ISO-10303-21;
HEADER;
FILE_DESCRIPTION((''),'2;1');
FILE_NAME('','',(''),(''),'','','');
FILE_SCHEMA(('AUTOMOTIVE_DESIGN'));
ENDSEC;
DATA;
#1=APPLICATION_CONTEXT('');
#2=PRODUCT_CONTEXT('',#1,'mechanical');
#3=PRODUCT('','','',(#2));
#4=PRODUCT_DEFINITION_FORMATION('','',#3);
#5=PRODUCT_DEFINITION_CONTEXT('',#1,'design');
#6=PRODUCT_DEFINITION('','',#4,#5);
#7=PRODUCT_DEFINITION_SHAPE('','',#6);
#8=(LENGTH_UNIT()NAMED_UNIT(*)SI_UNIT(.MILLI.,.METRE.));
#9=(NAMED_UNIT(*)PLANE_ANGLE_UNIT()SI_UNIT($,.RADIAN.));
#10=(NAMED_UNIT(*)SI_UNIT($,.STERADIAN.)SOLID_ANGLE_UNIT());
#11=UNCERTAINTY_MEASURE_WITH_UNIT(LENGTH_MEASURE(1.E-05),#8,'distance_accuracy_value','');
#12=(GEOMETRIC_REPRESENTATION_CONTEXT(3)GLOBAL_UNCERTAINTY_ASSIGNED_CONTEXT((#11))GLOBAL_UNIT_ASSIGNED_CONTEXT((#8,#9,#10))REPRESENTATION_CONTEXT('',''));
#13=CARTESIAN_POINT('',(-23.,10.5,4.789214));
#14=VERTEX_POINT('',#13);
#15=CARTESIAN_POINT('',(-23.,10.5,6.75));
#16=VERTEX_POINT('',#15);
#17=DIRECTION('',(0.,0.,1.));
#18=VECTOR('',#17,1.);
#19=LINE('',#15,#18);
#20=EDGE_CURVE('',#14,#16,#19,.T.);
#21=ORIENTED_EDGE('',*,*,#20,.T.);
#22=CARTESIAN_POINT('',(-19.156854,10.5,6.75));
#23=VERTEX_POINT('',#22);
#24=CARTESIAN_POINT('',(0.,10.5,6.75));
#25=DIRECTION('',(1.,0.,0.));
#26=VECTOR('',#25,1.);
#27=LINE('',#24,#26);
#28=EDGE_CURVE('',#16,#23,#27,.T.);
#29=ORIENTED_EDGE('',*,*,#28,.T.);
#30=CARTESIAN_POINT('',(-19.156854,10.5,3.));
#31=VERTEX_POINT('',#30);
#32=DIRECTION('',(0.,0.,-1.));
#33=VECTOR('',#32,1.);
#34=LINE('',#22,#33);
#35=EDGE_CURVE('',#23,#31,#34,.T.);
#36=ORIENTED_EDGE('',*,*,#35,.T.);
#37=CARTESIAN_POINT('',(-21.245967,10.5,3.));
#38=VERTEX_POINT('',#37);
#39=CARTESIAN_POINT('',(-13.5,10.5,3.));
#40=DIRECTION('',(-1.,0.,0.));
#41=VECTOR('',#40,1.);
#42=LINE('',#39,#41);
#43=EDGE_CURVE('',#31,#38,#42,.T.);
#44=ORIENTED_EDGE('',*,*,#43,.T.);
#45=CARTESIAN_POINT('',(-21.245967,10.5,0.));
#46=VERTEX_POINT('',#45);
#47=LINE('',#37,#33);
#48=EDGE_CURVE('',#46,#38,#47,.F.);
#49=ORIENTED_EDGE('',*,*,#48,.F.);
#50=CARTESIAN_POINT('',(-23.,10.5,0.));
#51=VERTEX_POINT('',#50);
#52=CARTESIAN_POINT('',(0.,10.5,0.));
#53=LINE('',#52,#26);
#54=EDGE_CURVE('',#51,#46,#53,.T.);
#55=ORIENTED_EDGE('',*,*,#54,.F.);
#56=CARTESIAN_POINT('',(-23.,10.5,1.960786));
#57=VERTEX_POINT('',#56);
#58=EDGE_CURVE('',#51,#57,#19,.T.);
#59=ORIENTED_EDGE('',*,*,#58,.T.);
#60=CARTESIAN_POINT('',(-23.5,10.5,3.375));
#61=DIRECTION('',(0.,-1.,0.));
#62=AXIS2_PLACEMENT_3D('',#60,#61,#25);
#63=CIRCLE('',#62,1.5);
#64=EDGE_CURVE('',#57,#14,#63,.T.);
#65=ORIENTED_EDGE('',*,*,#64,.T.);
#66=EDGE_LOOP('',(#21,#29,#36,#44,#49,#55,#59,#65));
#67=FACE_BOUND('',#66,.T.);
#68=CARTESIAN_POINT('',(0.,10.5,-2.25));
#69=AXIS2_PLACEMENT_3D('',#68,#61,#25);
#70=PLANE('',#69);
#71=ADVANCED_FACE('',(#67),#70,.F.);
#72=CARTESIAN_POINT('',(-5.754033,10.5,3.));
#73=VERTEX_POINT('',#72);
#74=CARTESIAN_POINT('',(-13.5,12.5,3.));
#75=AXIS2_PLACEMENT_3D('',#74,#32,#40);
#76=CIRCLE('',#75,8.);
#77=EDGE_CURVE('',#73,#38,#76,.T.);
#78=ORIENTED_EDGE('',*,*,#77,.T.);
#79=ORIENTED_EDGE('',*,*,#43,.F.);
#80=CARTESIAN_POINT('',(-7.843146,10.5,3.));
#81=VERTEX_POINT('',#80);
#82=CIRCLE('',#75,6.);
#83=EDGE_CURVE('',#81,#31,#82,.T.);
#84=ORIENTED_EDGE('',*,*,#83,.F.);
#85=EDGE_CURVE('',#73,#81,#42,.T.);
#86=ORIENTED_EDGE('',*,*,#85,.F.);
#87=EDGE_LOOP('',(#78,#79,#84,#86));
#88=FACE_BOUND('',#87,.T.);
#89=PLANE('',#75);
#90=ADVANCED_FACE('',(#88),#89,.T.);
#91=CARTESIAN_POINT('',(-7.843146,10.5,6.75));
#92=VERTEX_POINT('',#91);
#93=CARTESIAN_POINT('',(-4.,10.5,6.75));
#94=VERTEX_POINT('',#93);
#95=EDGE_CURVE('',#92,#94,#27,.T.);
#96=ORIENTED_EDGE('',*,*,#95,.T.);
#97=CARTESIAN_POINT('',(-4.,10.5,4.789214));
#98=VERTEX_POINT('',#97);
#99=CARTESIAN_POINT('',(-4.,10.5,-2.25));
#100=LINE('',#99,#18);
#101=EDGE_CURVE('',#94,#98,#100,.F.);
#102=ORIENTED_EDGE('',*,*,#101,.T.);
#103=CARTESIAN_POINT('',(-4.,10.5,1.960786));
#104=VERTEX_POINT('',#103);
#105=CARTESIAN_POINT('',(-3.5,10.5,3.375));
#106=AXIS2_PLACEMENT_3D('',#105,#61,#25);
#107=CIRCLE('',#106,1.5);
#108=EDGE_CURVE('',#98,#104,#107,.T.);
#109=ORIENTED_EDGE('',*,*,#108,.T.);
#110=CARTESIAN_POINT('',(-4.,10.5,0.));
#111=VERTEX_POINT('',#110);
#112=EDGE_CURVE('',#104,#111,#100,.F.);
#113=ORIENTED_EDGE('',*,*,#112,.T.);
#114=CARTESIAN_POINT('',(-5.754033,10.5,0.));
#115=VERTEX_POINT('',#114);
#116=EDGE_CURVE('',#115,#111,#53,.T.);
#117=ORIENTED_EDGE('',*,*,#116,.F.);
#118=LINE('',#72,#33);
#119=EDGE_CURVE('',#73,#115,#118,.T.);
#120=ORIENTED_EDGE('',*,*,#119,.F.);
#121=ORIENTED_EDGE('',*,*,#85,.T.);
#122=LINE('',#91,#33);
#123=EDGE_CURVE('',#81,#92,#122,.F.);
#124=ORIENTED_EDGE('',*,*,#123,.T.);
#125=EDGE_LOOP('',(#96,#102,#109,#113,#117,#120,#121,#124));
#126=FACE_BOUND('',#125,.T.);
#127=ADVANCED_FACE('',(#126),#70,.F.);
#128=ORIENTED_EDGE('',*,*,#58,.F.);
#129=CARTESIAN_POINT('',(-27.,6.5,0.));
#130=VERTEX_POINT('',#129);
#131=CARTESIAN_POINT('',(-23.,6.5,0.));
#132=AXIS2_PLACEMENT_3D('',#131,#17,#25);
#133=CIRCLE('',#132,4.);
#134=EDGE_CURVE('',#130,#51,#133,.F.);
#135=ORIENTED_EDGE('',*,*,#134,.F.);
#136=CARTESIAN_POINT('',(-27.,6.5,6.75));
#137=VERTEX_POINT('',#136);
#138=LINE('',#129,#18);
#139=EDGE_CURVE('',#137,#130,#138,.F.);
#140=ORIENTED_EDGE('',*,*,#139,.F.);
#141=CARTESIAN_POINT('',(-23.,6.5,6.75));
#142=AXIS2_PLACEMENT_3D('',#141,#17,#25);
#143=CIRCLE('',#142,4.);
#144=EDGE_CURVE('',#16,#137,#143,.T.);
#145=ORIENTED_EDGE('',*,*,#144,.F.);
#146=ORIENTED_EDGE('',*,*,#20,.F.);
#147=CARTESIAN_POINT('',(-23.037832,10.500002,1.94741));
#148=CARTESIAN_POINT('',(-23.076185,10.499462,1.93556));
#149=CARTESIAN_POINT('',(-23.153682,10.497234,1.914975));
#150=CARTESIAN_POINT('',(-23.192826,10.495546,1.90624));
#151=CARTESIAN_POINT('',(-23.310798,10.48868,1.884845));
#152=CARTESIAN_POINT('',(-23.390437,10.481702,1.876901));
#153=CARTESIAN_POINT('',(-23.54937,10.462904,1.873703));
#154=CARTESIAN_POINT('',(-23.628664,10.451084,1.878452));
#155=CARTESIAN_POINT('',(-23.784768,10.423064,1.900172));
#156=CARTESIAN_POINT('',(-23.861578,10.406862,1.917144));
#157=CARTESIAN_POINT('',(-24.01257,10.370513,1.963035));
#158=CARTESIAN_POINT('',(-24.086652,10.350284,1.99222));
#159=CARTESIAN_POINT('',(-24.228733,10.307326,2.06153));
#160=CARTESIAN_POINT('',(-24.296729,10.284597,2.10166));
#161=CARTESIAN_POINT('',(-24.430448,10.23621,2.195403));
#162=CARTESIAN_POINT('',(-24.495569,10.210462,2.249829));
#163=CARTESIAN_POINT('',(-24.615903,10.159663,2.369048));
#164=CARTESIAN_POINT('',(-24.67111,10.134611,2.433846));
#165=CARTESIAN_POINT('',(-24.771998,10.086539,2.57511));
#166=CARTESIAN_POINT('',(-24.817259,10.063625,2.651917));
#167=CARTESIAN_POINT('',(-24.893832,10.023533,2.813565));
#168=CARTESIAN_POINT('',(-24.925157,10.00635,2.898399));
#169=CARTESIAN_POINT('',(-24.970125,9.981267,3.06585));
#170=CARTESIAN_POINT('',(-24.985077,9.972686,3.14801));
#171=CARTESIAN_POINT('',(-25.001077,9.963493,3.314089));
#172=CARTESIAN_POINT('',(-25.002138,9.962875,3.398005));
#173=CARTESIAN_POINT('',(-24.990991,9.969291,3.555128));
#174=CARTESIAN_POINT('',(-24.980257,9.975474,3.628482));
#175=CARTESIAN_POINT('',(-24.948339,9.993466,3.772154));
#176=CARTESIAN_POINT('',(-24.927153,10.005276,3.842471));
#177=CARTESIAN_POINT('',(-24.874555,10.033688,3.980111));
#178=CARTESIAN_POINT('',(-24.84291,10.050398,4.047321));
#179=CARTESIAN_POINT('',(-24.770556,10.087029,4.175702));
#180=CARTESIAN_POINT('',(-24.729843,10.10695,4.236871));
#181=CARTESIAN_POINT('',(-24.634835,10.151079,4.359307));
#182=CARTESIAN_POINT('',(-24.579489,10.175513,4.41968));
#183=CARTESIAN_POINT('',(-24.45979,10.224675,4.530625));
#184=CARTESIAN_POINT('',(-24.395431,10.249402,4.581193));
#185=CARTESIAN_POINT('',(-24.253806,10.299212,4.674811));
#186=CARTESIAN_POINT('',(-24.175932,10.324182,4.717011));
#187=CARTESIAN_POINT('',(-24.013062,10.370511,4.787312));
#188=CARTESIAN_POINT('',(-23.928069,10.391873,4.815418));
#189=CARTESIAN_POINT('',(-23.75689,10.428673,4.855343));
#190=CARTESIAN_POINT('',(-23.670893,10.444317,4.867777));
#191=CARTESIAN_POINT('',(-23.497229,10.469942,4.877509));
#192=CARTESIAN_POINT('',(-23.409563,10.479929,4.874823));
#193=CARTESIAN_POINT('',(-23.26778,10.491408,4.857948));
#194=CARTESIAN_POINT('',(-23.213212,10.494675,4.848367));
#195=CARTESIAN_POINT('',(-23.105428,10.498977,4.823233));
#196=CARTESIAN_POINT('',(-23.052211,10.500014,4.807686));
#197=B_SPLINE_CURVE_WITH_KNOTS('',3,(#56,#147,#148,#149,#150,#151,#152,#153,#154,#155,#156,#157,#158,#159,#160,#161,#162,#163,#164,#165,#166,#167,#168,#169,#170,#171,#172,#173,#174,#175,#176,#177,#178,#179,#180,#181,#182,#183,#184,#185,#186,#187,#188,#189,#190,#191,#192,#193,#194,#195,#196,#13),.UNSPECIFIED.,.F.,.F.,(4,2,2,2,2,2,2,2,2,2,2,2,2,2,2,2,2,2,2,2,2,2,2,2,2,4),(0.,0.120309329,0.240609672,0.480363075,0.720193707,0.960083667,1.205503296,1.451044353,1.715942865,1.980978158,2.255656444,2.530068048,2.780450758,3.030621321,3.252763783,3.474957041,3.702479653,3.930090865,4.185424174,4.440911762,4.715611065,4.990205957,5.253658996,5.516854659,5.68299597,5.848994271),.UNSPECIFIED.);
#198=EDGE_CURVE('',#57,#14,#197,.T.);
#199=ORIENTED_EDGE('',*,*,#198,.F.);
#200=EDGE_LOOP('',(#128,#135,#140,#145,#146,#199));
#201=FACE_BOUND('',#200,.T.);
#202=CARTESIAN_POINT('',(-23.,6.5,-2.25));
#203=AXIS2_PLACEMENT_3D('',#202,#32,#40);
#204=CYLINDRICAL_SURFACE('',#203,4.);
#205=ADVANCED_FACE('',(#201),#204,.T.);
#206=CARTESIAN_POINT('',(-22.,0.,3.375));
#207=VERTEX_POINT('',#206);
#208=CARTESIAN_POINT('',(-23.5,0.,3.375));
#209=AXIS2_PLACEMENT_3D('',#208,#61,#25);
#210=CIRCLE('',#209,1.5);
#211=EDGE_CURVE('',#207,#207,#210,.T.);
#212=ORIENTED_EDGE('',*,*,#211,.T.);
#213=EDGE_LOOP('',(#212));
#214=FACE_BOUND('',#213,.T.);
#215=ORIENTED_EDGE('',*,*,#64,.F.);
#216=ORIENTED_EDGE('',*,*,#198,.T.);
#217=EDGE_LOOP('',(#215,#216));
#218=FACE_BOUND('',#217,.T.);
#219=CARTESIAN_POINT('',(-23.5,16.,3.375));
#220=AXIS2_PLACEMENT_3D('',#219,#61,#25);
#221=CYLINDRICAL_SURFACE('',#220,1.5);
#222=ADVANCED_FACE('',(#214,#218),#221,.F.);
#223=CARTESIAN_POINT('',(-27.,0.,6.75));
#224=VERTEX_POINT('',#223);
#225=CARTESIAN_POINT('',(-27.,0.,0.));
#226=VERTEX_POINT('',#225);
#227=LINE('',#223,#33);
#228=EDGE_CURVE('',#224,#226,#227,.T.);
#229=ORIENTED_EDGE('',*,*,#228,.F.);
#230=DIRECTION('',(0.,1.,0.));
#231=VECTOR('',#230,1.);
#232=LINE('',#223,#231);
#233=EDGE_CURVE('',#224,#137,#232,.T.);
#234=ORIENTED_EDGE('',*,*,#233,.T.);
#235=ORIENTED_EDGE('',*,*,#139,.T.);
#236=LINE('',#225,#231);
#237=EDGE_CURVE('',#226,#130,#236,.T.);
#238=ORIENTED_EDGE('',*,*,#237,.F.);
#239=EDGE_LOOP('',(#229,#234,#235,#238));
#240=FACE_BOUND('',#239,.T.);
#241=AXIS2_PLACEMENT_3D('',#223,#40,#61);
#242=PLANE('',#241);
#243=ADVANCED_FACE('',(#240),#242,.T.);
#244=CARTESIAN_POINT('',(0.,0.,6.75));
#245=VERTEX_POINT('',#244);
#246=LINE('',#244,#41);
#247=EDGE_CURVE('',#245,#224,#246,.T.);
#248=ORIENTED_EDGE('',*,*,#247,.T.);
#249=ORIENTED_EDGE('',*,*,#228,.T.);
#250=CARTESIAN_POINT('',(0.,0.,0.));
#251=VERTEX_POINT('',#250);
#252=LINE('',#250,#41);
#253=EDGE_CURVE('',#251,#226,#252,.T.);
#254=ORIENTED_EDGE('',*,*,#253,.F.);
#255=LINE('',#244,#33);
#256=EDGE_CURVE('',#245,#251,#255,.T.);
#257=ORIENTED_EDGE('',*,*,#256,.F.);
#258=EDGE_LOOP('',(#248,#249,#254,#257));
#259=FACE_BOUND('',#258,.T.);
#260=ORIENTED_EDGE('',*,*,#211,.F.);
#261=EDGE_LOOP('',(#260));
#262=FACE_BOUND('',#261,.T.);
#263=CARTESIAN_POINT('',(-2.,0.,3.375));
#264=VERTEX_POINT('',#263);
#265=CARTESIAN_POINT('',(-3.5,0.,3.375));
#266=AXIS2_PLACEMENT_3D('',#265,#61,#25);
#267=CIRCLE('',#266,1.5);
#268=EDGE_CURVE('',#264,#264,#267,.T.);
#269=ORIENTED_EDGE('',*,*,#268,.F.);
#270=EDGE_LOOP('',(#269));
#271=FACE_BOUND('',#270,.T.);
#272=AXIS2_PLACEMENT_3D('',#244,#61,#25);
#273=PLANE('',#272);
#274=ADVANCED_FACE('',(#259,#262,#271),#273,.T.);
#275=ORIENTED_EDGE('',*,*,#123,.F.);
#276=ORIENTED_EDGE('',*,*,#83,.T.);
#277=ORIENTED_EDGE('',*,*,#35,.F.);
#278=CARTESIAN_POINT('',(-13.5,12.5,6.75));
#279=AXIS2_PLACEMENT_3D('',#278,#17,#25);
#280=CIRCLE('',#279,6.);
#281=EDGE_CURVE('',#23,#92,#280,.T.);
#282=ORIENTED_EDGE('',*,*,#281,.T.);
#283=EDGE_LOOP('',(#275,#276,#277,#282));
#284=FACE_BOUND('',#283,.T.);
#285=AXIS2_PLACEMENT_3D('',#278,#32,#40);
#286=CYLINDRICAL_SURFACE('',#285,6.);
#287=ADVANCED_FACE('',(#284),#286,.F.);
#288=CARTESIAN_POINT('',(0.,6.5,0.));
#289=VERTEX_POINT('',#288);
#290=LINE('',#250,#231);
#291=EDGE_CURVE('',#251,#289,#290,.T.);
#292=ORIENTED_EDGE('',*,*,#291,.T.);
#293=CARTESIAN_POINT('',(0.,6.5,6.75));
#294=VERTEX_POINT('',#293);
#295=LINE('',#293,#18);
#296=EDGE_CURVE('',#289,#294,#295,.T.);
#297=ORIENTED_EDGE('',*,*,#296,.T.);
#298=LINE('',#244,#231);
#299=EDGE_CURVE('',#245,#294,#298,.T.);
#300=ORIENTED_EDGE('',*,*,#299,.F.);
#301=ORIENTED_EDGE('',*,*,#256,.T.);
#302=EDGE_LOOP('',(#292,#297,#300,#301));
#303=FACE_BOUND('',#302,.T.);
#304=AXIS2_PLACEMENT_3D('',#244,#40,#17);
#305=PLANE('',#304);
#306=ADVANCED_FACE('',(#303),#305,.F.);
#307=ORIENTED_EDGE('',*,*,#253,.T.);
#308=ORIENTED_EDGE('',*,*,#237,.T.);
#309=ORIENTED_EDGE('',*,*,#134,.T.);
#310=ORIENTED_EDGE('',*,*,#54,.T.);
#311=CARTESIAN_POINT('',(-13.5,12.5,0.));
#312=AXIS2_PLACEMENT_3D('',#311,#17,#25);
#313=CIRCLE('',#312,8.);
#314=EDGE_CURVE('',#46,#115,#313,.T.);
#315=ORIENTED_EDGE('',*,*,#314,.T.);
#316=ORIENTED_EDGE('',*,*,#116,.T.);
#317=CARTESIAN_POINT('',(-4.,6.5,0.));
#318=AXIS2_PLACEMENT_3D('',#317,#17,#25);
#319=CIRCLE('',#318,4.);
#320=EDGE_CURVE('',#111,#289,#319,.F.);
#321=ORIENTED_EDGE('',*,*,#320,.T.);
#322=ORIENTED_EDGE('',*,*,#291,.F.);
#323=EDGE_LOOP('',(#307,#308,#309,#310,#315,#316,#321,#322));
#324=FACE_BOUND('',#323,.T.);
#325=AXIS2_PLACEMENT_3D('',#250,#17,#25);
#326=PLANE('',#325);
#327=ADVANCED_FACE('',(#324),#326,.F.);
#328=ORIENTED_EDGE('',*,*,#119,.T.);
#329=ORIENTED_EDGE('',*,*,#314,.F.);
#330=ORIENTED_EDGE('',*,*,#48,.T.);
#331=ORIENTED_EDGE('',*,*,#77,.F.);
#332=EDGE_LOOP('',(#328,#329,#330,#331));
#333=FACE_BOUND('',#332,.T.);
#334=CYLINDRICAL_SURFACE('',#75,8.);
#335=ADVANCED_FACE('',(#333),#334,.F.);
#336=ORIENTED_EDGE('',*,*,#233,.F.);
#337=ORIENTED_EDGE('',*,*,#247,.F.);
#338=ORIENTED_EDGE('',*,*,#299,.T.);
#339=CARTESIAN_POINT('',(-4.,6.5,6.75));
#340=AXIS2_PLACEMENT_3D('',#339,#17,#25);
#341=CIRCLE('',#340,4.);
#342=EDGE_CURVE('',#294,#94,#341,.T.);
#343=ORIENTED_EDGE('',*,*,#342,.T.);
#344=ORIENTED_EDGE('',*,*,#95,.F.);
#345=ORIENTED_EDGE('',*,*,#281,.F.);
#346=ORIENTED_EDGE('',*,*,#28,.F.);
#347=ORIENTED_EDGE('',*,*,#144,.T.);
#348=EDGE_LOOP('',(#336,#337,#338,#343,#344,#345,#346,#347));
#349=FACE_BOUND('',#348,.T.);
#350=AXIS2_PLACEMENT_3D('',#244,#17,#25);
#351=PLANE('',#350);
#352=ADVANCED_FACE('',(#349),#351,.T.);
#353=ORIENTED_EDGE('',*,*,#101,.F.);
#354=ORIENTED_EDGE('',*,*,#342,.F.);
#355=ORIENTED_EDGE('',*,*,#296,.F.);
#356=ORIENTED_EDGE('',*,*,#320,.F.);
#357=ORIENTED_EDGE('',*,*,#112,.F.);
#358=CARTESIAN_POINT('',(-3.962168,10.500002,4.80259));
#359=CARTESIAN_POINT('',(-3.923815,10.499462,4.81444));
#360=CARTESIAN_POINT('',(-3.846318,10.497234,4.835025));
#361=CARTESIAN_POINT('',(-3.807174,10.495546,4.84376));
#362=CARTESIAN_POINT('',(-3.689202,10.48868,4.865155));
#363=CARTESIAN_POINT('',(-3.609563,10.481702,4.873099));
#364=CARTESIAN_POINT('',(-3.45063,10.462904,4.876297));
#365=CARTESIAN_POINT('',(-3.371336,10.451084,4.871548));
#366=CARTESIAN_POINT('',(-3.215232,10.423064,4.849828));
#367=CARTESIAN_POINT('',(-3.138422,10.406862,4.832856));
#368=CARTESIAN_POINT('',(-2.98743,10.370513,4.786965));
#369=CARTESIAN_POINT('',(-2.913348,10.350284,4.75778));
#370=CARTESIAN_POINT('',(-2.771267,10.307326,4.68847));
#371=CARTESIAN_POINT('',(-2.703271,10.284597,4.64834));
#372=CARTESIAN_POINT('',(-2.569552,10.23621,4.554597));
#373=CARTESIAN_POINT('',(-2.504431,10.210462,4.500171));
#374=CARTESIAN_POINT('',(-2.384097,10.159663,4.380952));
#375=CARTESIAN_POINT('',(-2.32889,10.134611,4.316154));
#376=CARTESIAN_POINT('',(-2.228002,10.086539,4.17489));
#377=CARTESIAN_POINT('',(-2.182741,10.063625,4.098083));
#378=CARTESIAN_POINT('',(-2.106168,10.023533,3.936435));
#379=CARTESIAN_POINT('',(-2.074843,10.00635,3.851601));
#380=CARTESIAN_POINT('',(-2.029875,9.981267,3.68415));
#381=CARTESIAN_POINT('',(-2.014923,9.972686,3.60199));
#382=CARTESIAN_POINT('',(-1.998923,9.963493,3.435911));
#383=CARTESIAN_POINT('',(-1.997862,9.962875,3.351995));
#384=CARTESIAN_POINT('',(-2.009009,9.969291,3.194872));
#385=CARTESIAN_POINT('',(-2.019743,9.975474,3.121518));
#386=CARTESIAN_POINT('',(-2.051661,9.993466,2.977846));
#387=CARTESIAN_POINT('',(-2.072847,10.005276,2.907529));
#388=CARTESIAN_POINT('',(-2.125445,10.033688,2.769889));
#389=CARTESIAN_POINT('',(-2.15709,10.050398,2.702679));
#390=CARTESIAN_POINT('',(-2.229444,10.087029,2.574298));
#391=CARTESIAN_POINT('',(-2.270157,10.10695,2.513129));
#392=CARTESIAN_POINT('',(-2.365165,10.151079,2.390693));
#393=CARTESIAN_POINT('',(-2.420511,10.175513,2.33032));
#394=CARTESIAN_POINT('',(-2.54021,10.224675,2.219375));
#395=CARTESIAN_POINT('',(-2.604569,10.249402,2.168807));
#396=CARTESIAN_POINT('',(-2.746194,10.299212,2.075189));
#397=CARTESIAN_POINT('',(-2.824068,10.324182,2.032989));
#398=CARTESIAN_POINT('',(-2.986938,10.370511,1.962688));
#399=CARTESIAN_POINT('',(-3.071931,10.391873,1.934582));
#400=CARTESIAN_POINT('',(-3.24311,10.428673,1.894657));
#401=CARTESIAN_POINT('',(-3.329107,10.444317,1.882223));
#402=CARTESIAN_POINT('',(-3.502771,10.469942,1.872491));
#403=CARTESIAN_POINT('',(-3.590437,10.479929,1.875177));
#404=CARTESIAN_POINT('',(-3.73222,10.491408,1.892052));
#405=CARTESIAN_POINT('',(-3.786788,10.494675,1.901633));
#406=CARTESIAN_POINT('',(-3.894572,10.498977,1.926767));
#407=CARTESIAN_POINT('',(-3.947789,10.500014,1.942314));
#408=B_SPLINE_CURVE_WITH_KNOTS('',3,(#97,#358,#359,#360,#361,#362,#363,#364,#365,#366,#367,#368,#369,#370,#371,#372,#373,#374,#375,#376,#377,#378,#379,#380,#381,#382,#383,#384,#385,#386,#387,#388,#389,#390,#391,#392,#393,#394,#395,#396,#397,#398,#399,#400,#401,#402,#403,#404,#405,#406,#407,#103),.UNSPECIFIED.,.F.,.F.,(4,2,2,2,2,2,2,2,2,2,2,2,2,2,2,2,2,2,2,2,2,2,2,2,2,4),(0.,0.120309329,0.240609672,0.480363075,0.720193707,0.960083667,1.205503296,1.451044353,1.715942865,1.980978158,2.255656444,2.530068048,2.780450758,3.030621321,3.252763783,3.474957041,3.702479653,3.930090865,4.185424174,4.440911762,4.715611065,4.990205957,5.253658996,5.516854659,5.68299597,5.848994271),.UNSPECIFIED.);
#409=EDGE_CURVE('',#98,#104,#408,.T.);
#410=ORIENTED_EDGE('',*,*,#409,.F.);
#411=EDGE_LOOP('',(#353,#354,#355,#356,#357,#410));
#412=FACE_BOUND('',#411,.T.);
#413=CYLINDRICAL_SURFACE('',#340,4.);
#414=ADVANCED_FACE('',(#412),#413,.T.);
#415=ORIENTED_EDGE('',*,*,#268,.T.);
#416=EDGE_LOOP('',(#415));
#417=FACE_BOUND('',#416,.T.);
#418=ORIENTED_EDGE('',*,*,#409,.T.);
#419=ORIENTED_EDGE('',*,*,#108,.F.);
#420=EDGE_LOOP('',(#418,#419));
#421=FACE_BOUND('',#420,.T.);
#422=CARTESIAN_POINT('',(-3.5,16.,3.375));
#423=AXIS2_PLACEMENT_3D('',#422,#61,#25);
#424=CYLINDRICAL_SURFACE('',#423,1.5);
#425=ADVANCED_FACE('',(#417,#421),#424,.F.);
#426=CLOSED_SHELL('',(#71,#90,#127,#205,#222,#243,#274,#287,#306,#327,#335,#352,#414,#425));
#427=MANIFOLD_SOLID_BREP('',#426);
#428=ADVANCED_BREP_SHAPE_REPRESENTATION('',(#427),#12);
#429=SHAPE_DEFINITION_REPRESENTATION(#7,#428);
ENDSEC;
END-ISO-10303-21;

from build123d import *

# Parameters (mm, degrees)
BOSS_EXTRUDE1_DEPTH = 6.75
SKETCH3_R           = 8
CUT_EXTRUDE2_DEPTH  = 3
SKETCH4_W           = 27
SKETCH4_H           = 2
CUT_EXTRUDE3_DEPTH  = 9
SKETCH5_R           = 1.5
CUT_EXTRUDE4_DEPTH  = 16
FILLET1_R           = 4


with BuildPart() as part:
    # Sketch1 → Boss-Extrude1 (new body)
    with BuildSketch(Plane.XY):
        with BuildLine():
            Line((-27, 0), (0, 0))
            Line((0, 0), (0, 12.5))
            Line((0, 12.5), (-7.5, 12.5))
            ThreePointArc((-7.5, 12.5), (-13.5, 6.5), (-19.5, 12.5))
            Line((-19.5, 12.5), (-27, 12.5))
            Line((-27, 12.5), (-27, 0))
        make_face()
    extrude(amount=BOSS_EXTRUDE1_DEPTH)

    # Sketch3 → Cut-Extrude2 (cut)
    with BuildSketch(Plane(origin=(0, 0, 0), x_dir=(-1, 0, 0), z_dir=(0, 0, -1))):
        with Locations((13.5, 12.5)):
            Circle(SKETCH3_R)
    extrude(amount=-CUT_EXTRUDE2_DEPTH, mode=Mode.SUBTRACT)

    # Sketch4 → Cut-Extrude3 (cut)
    with BuildSketch(Plane.XY.offset(6.75)):
        with Locations((-13.5, 11.5)):
            Rectangle(SKETCH4_W, SKETCH4_H)
    extrude(amount=-CUT_EXTRUDE3_DEPTH, mode=Mode.SUBTRACT)

    # Sketch5 → Cut-Extrude4 (cut)
    with BuildSketch(Plane.XZ):
        with Locations((-23.5, 3.375)):
            Circle(SKETCH5_R)
        with Locations((-3.5, 3.375)):
            Circle(SKETCH5_R)
    extrude(amount=-CUT_EXTRUDE4_DEPTH, mode=Mode.SUBTRACT)

    # Fillet1
    # the kernel refuses this fillet: 4 mm, written as the material it takes off along each edge
    with BuildSketch(Plane(origin=(-27, 10.5, 16.75), x_dir=(1, 0, 0), z_dir=(0, 0, -1))) as fillet1_piece_1:
        with BuildLine():
            CenterArc((FILLET1_R, FILLET1_R), FILLET1_R, 180, 90)
            Line((0, FILLET1_R), (0, 0))
            Line((0, 0), (FILLET1_R, 0))
        make_face()
    extrude(amount=26.75, mode=Mode.SUBTRACT)
    with BuildSketch(Plane(origin=(0, 10.5, 16.75), x_dir=(-1, 0, 0), z_dir=(0, 0, -1))) as fillet1_piece_2:
        with BuildLine():
            CenterArc((FILLET1_R, -FILLET1_R), FILLET1_R, 90, 90)
            Line((0, -FILLET1_R), (0, 0))
            Line((0, 0), (FILLET1_R, 0))
        make_face()
    extrude(amount=26.75, mode=Mode.SUBTRACT)


solid = part.part
